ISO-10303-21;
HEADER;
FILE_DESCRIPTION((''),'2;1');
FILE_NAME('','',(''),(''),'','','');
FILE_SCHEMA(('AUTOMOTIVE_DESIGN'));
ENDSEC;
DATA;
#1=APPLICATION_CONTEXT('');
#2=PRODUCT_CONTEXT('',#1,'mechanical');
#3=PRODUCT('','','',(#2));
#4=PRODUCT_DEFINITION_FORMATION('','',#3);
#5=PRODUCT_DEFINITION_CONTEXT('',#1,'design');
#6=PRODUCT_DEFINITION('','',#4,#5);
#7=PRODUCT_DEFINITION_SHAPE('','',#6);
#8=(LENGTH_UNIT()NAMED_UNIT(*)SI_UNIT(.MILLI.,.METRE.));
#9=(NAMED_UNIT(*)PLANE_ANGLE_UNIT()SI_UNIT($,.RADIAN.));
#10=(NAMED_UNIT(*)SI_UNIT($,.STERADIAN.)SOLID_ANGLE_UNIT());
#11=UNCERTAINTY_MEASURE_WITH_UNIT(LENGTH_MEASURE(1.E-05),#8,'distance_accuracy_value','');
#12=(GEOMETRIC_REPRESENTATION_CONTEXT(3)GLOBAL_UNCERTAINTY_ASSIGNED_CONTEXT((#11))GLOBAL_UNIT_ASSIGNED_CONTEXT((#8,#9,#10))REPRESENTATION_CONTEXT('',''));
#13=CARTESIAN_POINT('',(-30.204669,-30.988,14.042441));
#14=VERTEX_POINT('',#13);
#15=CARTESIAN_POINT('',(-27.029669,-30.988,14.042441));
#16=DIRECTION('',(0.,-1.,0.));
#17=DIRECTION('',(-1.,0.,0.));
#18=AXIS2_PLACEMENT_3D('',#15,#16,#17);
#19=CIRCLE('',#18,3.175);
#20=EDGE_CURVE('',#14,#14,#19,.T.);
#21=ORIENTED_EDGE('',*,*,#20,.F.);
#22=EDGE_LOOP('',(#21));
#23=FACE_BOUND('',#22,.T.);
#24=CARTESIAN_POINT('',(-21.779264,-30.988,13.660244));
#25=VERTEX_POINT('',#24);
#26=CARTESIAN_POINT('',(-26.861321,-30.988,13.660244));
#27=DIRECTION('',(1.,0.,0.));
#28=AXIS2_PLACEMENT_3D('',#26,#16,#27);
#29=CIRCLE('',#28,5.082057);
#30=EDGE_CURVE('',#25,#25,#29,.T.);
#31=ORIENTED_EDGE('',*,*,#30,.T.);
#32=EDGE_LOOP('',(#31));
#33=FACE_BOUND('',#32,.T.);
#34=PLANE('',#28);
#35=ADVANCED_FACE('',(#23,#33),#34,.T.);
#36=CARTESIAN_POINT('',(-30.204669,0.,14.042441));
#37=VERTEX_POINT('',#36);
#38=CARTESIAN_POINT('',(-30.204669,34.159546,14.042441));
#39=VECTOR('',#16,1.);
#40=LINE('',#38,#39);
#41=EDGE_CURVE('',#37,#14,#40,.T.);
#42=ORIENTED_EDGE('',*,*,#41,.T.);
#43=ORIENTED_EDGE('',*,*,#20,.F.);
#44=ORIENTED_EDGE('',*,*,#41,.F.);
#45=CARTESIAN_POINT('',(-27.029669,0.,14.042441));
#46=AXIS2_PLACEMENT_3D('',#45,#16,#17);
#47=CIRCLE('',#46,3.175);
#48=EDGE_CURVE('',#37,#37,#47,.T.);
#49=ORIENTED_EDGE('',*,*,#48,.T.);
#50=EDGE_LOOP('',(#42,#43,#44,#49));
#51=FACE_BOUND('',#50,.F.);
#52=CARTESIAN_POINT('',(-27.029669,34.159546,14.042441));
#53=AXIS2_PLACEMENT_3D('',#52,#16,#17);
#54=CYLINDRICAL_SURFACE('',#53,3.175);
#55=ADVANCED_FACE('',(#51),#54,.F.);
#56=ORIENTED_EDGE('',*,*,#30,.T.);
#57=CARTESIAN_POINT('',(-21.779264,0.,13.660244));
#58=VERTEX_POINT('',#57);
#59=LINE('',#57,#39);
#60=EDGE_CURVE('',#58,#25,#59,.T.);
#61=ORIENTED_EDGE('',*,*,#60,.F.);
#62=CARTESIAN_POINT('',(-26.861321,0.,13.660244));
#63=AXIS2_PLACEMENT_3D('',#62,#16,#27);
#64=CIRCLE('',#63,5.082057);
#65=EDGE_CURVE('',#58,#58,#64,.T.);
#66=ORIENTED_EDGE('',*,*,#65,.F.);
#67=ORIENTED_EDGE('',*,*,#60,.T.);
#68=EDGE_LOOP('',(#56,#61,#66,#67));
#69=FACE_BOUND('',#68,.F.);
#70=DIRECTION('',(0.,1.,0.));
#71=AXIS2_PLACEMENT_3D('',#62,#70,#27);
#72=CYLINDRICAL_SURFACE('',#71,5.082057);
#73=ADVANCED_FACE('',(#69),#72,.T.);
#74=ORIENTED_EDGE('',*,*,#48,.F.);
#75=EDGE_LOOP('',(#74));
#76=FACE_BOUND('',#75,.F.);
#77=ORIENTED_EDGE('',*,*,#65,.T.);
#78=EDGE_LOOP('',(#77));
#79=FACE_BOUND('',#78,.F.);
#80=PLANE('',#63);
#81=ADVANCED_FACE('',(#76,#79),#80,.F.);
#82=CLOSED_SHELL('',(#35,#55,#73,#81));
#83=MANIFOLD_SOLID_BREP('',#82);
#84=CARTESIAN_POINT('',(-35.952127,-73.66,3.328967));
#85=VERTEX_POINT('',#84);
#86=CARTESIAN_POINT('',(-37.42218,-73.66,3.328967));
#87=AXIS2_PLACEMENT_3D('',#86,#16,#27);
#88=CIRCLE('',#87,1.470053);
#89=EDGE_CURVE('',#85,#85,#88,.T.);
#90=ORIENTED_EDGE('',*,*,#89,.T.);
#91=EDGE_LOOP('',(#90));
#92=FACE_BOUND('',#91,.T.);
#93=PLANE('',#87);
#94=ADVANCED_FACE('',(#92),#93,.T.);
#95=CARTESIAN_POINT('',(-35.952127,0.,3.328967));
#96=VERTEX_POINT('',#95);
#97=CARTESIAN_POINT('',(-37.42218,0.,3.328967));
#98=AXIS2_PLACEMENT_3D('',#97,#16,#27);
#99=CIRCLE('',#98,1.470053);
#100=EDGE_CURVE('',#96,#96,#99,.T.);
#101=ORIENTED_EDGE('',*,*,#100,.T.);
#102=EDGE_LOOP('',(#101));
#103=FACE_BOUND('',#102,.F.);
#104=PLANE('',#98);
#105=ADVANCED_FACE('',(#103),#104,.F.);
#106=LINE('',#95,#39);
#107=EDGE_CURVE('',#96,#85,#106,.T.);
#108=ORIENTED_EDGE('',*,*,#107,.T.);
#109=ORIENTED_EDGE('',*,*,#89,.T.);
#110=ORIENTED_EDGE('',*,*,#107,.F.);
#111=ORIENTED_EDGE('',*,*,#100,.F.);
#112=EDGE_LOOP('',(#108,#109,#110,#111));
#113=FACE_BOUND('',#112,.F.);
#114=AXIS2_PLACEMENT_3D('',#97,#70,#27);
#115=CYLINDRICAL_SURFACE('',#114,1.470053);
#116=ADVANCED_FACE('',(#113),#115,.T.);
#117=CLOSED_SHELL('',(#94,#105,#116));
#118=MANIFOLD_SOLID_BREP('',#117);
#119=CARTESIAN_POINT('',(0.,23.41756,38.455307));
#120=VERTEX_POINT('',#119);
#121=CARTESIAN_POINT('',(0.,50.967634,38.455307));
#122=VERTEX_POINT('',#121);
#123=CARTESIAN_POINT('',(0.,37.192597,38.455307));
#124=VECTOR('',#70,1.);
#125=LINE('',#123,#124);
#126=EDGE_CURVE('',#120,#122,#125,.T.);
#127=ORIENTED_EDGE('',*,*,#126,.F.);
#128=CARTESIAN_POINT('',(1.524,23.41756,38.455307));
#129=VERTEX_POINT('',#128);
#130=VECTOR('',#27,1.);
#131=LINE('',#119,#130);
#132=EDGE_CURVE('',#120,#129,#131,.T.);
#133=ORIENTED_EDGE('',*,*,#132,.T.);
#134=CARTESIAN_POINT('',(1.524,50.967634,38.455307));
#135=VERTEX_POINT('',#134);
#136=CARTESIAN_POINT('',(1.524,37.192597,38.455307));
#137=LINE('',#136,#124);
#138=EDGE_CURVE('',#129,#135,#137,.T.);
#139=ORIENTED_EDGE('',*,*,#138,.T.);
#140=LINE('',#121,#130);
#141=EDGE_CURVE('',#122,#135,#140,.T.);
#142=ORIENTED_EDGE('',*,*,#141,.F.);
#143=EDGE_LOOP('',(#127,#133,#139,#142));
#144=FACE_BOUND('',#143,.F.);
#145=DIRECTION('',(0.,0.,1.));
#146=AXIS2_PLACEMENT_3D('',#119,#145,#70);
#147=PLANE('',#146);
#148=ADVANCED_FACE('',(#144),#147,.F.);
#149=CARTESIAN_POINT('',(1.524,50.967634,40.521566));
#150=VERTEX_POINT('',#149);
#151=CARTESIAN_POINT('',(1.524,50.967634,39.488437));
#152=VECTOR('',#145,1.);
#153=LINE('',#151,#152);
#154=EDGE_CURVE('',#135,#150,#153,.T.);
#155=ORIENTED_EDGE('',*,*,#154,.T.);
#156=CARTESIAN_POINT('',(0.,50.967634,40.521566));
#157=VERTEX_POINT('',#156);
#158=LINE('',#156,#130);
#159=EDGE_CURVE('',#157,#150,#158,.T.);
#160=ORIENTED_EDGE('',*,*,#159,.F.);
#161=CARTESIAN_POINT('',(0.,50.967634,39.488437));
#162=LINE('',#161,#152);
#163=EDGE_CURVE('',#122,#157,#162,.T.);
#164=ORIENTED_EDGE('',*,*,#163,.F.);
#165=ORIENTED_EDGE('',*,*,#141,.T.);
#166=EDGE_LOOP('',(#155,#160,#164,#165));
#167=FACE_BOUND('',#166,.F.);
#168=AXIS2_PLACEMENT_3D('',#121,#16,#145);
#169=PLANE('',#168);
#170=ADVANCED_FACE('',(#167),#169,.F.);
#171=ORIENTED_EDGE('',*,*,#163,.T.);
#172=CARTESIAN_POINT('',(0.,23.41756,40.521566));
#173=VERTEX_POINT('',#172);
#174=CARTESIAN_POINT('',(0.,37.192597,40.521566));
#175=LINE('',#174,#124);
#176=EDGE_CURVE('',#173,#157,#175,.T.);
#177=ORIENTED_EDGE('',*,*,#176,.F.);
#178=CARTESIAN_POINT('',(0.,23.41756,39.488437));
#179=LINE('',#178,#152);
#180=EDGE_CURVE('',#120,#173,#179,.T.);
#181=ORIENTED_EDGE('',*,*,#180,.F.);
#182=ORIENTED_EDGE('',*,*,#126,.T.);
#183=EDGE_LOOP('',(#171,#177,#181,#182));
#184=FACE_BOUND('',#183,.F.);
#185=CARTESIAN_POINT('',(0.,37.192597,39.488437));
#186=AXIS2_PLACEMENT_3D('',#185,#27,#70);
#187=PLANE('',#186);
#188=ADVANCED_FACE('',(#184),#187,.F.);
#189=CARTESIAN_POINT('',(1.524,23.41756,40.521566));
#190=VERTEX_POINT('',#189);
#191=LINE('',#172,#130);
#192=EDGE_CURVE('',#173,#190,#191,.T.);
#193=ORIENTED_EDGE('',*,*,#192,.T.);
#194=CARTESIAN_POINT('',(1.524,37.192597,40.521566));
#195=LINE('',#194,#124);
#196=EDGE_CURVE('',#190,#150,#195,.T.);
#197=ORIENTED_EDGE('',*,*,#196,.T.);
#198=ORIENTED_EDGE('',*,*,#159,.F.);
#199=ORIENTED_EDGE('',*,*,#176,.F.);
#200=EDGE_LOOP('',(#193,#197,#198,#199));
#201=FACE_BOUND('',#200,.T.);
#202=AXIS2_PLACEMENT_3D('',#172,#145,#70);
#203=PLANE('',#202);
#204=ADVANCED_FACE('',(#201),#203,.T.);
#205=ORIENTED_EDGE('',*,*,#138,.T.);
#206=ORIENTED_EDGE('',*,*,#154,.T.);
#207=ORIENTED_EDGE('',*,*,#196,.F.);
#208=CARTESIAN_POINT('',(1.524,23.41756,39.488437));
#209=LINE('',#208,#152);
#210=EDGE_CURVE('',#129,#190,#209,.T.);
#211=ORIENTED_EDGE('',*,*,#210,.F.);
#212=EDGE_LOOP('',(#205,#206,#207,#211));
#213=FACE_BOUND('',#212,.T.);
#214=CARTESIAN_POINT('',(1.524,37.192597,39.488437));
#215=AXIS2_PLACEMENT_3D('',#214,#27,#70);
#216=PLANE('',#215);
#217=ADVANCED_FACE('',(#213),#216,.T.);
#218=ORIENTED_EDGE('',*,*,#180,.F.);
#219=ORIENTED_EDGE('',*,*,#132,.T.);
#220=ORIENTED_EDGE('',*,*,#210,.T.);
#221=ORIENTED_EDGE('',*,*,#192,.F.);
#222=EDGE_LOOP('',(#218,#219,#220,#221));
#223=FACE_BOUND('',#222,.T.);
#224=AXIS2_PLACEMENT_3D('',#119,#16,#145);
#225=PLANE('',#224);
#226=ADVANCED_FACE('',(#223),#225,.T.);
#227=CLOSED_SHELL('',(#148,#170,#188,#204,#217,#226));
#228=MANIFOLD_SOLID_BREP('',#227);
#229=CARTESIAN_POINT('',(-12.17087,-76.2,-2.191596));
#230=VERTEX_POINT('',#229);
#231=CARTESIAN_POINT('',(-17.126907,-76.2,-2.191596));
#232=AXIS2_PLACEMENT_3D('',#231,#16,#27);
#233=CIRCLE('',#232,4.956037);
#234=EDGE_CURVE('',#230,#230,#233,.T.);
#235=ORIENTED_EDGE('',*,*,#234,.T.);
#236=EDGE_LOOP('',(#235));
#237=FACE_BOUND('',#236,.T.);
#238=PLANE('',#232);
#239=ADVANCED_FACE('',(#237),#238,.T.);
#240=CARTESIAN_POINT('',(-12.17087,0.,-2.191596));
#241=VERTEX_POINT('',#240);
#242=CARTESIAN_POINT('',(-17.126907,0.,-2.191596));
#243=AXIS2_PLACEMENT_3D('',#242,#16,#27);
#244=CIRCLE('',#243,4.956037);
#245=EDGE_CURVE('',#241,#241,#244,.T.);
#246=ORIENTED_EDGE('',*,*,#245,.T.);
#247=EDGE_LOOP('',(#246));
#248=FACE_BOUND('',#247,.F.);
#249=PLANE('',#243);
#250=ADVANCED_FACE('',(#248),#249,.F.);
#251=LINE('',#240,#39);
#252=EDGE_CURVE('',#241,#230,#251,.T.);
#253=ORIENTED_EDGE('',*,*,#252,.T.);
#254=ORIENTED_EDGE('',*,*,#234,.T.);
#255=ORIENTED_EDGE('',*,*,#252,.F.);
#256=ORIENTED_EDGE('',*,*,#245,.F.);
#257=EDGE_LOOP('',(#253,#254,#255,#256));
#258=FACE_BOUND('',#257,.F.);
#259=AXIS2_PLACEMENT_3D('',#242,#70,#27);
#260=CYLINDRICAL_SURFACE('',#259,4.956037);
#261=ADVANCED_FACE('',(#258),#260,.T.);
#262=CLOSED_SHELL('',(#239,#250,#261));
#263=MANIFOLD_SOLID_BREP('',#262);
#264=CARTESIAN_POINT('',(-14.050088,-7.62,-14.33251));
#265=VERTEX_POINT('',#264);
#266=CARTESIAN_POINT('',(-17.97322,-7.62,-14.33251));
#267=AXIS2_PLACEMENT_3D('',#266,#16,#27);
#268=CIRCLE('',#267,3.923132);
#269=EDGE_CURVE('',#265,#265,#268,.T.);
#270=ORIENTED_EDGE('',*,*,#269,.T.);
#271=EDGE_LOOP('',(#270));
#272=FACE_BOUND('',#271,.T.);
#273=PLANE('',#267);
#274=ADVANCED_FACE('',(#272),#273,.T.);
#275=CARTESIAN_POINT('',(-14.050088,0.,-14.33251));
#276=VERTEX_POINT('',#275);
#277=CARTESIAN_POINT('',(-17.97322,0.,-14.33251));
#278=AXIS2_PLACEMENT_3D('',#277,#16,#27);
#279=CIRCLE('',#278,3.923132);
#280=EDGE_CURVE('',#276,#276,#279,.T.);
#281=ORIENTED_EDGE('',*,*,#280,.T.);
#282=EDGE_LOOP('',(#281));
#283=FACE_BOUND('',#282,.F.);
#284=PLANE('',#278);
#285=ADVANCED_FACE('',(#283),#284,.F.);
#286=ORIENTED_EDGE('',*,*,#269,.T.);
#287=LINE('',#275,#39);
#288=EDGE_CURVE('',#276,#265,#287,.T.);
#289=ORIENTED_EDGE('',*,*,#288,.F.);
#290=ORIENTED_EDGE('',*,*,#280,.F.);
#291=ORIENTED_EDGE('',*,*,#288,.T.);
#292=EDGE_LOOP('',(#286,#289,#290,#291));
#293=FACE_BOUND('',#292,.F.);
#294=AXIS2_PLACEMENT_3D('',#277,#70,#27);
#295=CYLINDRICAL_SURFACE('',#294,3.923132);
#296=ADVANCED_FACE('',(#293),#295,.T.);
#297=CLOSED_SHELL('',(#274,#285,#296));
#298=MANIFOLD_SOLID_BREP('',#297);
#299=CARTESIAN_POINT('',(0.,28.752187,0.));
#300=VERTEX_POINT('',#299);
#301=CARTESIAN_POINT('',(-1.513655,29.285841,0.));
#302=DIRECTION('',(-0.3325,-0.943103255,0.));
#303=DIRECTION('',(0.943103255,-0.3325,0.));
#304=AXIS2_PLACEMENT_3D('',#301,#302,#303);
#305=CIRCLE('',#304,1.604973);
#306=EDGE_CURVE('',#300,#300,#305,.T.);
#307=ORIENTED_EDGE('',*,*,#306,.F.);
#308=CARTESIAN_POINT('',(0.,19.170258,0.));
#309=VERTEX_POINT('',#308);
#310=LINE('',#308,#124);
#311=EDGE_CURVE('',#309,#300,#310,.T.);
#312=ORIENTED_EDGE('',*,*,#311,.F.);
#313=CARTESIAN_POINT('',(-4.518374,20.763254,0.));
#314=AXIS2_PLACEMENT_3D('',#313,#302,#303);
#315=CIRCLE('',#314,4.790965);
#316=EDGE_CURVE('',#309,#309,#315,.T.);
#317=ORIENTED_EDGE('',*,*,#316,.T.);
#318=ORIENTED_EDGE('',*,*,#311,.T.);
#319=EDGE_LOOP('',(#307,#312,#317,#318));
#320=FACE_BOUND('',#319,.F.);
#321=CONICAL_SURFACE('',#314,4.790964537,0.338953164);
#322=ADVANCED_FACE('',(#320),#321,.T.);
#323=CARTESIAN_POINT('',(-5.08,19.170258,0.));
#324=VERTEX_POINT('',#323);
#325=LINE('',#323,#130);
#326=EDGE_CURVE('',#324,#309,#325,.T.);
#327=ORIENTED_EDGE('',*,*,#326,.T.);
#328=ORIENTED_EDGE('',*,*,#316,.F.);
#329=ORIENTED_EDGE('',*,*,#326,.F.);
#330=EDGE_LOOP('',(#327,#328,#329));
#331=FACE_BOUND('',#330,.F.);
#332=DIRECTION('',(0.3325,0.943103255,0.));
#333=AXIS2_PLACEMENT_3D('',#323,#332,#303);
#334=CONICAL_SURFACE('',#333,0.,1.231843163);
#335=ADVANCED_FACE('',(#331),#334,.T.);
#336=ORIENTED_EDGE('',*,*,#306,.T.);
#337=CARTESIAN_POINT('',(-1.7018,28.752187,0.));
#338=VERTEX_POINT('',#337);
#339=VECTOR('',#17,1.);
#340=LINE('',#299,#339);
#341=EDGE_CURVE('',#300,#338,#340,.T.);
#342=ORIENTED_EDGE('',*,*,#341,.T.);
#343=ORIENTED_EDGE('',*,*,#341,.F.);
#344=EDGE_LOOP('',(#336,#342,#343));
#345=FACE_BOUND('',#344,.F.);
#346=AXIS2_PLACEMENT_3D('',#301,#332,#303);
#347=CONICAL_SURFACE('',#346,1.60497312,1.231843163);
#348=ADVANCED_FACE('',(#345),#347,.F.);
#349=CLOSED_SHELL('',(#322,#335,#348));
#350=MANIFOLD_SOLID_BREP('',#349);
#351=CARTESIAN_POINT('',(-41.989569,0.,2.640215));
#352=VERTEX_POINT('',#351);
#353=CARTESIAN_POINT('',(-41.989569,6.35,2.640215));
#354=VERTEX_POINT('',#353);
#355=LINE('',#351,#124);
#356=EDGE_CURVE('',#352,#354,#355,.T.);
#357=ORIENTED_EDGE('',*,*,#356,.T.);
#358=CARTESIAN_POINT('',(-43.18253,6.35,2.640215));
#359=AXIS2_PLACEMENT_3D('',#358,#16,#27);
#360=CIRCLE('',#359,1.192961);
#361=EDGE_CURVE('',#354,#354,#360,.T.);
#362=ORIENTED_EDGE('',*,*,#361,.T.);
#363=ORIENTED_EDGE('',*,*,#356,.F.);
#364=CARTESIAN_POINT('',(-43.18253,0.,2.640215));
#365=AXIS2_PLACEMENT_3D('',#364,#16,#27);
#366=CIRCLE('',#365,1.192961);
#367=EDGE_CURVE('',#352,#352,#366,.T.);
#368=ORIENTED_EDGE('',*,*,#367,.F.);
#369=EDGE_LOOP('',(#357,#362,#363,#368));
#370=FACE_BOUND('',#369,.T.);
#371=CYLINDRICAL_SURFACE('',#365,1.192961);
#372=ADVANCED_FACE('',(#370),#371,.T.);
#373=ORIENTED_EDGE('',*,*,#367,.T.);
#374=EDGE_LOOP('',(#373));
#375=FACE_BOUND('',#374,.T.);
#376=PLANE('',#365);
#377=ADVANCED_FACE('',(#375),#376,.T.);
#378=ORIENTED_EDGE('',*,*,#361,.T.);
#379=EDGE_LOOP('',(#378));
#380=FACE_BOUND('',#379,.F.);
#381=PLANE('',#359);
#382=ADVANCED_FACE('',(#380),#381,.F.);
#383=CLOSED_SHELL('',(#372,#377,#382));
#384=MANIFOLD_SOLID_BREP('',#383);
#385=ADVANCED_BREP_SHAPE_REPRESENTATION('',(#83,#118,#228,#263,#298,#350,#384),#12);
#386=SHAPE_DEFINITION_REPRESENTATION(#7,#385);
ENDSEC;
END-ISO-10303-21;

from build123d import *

# Parameters (mm, degrees)
F2_R      = 4.9560366271
F3_DEPTH  = 76.2
F4_R      = 3.9231322821
F5_DEPTH  = 7.62
F6_R      = 1.1929608885
F7_DEPTH  = 6.35
F8_W      = 27.5500733405
F8_H      = 2.0662583411
F9_DEPTH  = 1.524
F10_R     = 5.082057301
F11_DEPTH = 30.988
F13_D     = 6.35
F16_R     = 1.4700534699
F17_DEPTH = 73.66


# Not quite as in the source:
# - the program builds the solid bodies; features that only make, move or delete a surface that nothing else refers to are left out


with BuildPart() as f1:
    # F0 (on Top) → F1 (revolve)
    with BuildSketch(Plane.XY):
        Polygon((0, 19.1702581942), (0, 28.7521872672), (-1.7018, 28.7521872672), (-5.08, 19.1702581942), align=None)
    revolve(axis=Axis((-3.3909, 23.9612227307, 0), (-0.3325, -0.9431032552, 0)))


with BuildPart() as f3:
    # F2 (on Front) → F3 (new body)
    with BuildSketch(Plane.XZ):
        with Locations((-17.1269066632, -2.1915955003)):
            Circle(F2_R)
    extrude(amount=F3_DEPTH)


with BuildPart() as f5:
    # F4 (on Front) → F5 (new body)
    with BuildSketch(Plane.XZ):
        with Locations((-17.9732199758, -14.3325095996)):
            Circle(F4_R)
    extrude(amount=F5_DEPTH)


with BuildPart() as f7:
    # F6 (on Front) → F7 (new body)
    with BuildSketch(Plane.XZ):
        with Locations((-43.1825295091, 2.6402152143)):
            Circle(F6_R)
    extrude(amount=-F7_DEPTH)


with BuildPart() as f9:
    # F8 (on Right) → F9 (new body)
    with BuildSketch(Plane.YZ):
        with Locations((37.1925970539, 39.4884366542)):
            Rectangle(F8_W, F8_H)
    extrude(amount=F9_DEPTH)


with BuildPart() as f11:
    # F10 (on Front) → F11 (new body)
    with BuildSketch(Plane.XZ):
        with Locations((-26.8613211811, 13.6602437124)):
            Circle(F10_R)
    extrude(amount=F11_DEPTH)

    # F13 (through all)
    with Locations(Plane(origin=(0, 0, 0), x_dir=(1, 0, 0), z_dir=(0, 1, 0))):
        with Locations((-27.0296689123, -14.0424408019)):
            Hole(F13_D / 2)


with BuildPart() as f17:
    # F16 (on Front) → F17 (new body)
    with BuildSketch(Plane.XZ):
        with Locations((-37.4221801758, 3.328967141)):
            Circle(F16_R)
    extrude(amount=F17_DEPTH)


solid = Compound([f1.part, f3.part, f5.part, f7.part, f9.part, f11.part, f17.part])
